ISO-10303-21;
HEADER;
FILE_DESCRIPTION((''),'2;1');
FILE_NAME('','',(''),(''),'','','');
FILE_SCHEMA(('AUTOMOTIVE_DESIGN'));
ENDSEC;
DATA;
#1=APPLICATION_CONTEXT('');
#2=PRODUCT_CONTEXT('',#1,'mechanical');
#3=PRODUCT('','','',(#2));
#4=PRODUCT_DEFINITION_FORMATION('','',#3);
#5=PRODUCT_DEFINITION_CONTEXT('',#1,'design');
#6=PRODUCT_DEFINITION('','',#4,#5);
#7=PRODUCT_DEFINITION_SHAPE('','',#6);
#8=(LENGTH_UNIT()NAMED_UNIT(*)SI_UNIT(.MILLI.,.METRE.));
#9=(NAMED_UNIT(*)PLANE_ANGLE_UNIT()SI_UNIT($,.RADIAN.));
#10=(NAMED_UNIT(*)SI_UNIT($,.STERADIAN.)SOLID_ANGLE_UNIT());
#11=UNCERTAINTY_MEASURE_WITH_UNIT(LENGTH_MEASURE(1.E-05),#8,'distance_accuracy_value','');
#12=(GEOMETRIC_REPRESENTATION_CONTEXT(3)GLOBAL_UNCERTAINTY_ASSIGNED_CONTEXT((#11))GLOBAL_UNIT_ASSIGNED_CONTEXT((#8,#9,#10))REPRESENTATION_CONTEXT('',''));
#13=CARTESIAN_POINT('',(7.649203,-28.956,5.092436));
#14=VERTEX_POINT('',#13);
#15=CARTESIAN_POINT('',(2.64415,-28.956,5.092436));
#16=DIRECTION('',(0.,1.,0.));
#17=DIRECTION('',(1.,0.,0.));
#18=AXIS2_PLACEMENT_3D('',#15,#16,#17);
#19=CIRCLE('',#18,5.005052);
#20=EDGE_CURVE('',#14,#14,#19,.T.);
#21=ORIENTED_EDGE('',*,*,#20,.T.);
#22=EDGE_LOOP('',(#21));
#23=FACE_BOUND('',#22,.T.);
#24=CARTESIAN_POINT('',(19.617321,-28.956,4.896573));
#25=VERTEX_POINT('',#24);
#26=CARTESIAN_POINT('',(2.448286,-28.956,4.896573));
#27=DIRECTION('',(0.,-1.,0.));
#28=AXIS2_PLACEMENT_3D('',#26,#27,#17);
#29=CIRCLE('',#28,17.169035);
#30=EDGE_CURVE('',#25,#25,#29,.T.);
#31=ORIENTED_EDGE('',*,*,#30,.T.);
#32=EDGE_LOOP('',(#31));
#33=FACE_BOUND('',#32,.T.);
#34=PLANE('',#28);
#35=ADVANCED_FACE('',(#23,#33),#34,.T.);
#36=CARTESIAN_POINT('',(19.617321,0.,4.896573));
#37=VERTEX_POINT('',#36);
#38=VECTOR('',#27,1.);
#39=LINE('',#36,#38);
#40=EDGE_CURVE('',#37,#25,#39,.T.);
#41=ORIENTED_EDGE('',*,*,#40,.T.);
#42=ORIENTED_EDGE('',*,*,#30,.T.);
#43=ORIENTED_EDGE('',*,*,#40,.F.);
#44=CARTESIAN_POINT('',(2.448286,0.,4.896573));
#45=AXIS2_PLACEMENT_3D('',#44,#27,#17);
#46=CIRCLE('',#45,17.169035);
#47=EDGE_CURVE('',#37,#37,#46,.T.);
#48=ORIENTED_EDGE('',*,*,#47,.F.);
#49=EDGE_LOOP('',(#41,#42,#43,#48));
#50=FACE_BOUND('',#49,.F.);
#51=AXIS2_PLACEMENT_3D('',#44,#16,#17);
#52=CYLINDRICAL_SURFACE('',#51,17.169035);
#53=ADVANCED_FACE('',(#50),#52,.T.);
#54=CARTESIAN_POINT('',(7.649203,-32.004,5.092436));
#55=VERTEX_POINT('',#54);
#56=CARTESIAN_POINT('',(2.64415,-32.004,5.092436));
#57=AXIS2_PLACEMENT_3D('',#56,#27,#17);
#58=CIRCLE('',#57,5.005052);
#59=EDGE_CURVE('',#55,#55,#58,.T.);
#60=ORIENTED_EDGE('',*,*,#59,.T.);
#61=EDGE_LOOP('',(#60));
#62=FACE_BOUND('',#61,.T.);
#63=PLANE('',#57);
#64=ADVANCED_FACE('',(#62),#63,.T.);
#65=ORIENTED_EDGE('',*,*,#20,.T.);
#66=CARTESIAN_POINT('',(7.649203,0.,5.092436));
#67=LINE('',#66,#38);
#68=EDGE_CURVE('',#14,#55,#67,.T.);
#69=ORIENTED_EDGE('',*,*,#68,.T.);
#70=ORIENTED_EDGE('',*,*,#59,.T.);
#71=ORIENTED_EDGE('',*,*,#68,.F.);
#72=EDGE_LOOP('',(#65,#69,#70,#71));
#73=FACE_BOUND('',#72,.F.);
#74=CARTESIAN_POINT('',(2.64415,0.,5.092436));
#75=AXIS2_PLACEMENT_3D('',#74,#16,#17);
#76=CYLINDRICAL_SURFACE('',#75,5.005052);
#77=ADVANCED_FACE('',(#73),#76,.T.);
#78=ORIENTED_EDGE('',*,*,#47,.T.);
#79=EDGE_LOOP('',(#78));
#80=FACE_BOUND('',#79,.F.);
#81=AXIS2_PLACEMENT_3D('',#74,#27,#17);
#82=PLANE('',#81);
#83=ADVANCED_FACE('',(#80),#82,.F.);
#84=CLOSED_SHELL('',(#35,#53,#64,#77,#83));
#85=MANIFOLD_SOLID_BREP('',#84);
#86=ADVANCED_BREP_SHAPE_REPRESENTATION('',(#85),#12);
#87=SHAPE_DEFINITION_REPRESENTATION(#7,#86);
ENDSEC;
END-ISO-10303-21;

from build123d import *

# Parameters (mm, degrees)
F4_R     = 17.1690350151
F5_DEPTH = 28.956
F6_R     = 5.0050524863
F7_DEPTH = 32.004


# Not quite as in the source:
# - a feature of the source that left no trace in its solid (it failed there, or was rolled back) is left out
# - the program builds the solid bodies; features that only make, move or delete a surface that nothing else refers to are left out


with BuildPart() as f5:
    # F4 (on Front) → F5 (new body)
    with BuildSketch(Plane.XZ):
        with Locations((2.4482863955, 4.896572791)):
            Circle(F4_R)
    extrude(amount=F5_DEPTH)

    # F6 (on Front) → F7 (join)
    with BuildSketch(Plane.XZ):
        with Locations((2.6441500522, 5.0924359821)):
            Circle(F6_R)
    extrude(amount=F7_DEPTH)


solid = f5.part
